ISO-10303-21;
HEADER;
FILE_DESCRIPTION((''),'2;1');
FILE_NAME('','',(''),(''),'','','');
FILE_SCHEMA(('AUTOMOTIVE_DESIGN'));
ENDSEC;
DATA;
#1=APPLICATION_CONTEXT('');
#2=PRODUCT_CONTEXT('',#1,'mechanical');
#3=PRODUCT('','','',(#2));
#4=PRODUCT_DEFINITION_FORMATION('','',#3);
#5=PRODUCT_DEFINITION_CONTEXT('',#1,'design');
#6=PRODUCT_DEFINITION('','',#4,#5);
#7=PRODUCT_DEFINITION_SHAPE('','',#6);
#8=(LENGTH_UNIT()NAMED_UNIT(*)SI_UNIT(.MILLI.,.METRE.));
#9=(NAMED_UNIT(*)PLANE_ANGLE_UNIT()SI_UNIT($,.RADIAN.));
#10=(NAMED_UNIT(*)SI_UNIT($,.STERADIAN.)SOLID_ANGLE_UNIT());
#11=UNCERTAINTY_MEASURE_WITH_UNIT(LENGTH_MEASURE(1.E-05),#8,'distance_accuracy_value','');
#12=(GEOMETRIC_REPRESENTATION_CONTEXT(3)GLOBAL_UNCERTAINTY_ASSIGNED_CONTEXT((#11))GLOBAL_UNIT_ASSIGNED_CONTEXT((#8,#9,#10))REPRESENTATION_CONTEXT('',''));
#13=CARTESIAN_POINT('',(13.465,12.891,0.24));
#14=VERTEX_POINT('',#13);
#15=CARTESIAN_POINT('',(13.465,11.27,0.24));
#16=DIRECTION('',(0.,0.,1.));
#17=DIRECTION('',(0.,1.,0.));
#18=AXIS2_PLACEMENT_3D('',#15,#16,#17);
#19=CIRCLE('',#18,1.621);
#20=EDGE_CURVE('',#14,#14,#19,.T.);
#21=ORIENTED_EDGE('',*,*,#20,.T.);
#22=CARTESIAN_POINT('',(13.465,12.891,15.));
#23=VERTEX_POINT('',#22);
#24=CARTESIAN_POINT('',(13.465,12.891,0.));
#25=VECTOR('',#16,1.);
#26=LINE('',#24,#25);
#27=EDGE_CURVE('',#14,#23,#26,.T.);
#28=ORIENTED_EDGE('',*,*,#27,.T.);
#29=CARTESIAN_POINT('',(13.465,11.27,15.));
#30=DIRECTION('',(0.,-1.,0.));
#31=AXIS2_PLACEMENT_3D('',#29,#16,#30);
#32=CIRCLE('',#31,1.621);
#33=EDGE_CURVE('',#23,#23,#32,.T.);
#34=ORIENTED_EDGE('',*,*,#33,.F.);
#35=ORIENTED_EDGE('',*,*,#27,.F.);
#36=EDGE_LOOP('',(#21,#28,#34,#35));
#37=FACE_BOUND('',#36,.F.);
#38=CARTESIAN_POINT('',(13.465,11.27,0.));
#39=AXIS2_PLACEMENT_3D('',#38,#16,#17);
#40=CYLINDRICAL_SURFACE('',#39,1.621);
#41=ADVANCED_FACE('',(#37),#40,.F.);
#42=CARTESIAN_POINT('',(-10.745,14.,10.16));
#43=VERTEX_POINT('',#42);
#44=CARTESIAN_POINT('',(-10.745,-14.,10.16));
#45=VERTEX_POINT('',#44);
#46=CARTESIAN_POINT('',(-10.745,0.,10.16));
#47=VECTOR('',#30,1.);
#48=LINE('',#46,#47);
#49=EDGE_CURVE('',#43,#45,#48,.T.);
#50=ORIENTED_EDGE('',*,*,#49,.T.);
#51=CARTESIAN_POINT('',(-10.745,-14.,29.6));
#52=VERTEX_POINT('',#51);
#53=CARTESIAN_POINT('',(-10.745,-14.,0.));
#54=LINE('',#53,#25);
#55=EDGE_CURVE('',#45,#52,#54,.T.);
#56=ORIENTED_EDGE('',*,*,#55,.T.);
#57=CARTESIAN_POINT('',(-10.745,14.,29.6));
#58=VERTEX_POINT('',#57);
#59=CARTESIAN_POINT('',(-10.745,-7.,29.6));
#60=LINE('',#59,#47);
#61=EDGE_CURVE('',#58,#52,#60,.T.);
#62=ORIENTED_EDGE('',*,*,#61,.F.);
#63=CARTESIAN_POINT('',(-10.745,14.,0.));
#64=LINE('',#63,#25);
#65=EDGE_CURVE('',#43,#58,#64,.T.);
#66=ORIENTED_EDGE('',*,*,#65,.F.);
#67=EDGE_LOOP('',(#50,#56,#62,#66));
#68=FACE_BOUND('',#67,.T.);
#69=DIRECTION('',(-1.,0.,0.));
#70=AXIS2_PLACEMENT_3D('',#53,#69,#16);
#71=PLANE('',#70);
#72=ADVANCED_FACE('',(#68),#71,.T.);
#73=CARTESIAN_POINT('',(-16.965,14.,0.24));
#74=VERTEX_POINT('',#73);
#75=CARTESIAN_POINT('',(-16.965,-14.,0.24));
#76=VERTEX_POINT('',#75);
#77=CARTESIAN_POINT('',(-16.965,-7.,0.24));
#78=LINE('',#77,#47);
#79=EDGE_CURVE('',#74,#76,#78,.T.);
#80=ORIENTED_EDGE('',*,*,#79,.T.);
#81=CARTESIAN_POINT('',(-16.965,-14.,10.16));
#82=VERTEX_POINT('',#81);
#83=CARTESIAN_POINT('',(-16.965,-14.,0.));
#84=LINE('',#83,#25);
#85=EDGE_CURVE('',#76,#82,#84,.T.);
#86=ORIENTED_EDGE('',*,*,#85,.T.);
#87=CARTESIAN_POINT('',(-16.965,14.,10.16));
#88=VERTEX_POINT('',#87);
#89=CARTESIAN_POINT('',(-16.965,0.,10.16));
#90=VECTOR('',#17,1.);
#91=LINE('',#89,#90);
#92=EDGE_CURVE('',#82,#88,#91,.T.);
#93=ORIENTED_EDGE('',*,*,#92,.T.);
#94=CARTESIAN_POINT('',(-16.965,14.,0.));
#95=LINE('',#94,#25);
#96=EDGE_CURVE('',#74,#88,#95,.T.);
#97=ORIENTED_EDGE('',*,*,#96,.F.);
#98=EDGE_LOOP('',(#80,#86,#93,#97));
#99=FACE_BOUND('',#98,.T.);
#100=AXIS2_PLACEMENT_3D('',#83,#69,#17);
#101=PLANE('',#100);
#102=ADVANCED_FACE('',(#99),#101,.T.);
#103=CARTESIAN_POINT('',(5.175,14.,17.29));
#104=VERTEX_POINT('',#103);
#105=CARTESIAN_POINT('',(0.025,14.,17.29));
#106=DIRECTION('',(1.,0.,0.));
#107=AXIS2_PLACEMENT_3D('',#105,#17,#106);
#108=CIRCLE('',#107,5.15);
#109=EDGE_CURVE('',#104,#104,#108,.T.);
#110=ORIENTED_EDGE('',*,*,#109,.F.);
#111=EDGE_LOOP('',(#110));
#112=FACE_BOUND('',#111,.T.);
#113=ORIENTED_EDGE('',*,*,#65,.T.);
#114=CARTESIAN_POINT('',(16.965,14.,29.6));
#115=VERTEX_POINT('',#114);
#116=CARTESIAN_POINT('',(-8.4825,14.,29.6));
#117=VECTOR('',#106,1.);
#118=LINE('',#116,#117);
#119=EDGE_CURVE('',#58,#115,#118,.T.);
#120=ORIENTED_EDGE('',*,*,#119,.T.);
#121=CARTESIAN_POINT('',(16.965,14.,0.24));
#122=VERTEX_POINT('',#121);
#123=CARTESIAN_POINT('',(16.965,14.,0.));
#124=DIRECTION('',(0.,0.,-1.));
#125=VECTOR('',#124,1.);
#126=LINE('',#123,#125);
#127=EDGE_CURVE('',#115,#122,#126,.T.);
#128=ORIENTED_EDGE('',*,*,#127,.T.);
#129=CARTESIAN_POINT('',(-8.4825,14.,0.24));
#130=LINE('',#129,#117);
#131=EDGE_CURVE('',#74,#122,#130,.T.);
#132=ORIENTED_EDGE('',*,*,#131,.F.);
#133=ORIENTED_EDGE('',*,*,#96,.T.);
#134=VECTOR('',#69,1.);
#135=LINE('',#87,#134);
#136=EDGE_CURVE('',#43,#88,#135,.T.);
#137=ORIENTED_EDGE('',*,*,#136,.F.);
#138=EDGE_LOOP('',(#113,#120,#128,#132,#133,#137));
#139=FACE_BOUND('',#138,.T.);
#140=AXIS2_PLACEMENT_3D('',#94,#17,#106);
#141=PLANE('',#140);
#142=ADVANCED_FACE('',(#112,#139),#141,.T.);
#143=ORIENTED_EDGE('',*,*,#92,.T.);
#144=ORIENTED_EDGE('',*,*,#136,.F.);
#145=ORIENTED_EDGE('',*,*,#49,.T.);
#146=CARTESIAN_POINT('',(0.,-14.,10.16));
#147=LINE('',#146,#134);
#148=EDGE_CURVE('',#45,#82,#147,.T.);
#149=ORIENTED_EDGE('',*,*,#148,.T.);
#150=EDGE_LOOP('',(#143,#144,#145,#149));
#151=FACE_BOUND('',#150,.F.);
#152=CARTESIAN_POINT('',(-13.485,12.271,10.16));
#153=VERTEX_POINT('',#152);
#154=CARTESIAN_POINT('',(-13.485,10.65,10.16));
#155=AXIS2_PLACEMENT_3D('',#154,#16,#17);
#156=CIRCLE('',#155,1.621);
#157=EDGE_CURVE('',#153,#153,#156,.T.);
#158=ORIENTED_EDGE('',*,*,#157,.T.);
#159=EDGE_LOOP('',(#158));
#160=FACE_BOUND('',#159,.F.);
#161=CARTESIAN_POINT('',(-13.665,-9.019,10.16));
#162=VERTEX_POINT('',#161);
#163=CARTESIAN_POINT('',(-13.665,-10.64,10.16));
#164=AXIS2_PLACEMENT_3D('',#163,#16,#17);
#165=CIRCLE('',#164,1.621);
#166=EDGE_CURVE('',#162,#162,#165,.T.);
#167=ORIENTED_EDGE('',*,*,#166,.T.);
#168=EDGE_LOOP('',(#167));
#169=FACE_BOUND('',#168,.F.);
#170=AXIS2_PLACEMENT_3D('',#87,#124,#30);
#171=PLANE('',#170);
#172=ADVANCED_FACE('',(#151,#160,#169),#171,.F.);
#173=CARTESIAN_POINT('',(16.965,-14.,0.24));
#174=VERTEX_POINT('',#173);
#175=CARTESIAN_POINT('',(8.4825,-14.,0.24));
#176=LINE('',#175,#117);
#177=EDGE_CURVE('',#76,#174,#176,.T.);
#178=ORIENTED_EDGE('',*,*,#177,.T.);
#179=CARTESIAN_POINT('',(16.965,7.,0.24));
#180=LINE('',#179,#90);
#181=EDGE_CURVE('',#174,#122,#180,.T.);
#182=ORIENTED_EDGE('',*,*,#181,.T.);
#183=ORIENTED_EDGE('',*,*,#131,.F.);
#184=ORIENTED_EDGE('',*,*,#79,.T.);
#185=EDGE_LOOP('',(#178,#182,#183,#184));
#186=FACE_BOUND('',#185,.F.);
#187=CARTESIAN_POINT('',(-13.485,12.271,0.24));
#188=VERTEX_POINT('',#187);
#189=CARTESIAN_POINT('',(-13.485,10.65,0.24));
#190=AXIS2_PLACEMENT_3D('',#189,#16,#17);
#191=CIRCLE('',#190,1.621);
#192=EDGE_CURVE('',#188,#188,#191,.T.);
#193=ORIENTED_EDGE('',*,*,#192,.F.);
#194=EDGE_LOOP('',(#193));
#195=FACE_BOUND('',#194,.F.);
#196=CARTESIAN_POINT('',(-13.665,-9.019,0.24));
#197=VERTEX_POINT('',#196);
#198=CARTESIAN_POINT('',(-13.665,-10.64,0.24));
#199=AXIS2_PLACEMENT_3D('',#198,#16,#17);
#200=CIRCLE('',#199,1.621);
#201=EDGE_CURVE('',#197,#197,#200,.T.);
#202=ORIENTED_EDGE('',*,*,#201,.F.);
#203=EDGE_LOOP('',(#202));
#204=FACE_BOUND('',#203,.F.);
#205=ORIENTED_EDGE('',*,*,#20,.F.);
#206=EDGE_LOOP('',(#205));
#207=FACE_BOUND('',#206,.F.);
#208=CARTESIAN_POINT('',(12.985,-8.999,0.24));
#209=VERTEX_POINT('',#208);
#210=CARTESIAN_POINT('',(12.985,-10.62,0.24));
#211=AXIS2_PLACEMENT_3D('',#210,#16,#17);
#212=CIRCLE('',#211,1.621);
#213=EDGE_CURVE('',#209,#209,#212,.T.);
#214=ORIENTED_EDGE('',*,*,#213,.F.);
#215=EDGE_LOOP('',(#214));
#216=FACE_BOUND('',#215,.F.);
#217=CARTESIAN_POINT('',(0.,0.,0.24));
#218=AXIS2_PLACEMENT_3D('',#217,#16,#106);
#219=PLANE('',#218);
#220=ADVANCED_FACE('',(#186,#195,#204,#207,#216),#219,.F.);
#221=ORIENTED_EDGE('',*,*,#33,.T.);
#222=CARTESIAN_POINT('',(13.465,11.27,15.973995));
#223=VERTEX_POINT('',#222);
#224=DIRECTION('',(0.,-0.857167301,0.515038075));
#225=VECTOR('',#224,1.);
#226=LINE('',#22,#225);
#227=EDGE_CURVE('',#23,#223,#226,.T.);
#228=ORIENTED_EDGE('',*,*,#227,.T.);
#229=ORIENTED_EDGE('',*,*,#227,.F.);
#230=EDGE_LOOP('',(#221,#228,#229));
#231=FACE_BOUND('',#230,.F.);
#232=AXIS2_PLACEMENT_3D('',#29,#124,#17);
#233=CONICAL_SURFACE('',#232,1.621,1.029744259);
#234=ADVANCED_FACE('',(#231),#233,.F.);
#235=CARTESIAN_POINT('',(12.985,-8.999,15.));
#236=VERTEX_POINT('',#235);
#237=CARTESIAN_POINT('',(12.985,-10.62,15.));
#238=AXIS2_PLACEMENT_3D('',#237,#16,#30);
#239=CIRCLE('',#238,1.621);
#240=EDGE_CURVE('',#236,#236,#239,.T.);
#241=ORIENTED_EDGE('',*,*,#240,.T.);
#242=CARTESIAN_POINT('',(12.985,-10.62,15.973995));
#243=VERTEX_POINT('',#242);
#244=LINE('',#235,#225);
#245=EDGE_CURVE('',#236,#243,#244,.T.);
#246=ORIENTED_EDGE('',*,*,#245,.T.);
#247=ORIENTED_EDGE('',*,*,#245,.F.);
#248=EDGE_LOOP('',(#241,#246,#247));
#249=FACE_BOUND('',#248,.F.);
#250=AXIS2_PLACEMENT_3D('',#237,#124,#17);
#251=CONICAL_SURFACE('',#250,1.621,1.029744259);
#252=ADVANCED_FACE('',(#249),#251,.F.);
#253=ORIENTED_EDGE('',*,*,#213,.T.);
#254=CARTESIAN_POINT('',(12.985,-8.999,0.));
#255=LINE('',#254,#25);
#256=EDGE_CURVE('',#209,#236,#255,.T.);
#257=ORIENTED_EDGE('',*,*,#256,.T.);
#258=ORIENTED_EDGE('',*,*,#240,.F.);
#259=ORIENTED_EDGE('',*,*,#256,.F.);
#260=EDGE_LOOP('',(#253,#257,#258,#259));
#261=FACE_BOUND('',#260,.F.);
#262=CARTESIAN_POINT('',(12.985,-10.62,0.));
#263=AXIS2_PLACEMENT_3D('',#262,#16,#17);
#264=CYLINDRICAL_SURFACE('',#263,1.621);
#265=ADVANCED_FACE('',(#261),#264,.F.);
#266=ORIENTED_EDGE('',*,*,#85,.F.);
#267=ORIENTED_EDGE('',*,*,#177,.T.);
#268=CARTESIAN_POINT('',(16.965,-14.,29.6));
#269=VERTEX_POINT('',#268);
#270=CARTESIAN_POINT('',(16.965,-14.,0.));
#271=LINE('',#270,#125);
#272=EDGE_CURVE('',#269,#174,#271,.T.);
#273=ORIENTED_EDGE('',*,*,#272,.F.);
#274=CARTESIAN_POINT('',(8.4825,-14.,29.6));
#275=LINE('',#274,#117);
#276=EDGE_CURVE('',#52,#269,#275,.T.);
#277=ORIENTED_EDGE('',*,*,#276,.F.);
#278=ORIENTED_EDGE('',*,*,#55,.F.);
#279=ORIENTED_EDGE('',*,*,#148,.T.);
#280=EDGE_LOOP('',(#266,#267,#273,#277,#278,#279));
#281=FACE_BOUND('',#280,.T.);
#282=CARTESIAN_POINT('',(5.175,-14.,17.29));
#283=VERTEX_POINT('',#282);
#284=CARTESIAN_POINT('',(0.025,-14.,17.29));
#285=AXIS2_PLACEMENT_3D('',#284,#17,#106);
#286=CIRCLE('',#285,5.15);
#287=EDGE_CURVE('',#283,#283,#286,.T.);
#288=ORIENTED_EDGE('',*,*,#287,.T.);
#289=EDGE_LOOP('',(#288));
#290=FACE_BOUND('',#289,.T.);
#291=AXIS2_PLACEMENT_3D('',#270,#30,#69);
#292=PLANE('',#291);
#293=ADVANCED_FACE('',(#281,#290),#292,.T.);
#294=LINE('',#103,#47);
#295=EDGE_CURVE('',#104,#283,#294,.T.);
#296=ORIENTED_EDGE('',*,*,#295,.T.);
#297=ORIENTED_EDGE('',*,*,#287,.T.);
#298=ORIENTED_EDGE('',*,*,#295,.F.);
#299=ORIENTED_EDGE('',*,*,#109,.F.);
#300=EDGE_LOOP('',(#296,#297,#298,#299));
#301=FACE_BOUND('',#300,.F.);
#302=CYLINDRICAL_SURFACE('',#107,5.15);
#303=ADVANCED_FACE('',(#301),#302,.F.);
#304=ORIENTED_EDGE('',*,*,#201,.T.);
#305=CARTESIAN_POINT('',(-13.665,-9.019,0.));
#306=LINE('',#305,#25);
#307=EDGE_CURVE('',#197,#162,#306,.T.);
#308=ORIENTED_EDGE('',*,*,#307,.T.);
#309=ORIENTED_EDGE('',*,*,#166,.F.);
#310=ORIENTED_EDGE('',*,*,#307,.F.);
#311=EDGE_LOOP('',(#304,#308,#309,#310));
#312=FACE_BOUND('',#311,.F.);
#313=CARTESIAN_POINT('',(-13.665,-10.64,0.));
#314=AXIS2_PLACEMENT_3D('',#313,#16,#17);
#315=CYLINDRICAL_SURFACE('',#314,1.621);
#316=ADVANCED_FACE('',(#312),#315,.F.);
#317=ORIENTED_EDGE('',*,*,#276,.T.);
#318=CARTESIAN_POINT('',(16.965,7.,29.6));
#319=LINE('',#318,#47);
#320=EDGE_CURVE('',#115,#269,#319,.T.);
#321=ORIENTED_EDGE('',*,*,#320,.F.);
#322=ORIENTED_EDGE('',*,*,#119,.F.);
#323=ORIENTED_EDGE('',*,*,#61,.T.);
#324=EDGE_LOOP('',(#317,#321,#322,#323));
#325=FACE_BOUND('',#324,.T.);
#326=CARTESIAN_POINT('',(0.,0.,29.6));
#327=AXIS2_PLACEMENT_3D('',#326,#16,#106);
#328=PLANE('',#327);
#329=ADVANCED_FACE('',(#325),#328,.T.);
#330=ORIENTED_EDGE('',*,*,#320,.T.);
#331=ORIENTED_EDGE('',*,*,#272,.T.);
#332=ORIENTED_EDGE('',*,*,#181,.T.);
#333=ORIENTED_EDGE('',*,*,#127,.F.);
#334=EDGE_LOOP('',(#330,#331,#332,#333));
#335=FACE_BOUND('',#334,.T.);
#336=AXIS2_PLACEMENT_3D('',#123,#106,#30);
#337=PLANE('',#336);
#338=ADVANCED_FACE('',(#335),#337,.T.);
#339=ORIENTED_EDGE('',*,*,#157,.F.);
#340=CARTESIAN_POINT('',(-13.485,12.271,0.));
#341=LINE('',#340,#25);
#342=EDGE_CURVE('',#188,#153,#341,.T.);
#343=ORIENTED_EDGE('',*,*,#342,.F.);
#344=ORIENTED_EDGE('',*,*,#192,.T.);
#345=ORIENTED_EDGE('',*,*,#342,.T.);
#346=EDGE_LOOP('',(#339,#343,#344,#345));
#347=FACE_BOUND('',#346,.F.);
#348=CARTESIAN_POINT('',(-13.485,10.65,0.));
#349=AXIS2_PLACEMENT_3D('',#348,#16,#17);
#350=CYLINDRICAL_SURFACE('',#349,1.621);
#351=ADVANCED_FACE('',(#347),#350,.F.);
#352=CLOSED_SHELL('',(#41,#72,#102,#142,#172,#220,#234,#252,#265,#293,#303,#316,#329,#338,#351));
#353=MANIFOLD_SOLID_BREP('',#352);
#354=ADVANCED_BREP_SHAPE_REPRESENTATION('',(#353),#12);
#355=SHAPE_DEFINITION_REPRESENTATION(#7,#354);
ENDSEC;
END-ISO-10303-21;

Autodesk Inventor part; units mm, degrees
ref_plane "YZ Plane" through (0, 0, 0) normal (1, 0, 0) x (0, 1, 0)
ref_plane "XZ Plane" through (0, 0, 0) normal (0, 1, 0) x (-1, 0, 0)
ref_plane "XY Plane" through (0, 0, 0) normal (0, 0, 1) x (1, 0, 0)
sketch "Sketch2" plane through (0, 0, 0) normal (0, 0, 1) x (1, 0, 0)
  line L0 (-16.965, 14) -> (16.965, 14)
  line L1 (16.965, 14) -> (16.965, -14)
  line L2 (16.965, -14) -> (-16.965, -14)
  line L3 (-16.965, -14) -> (-16.965, 14)
  line L4 (-16.965, 14) -> (16.965, -14) construction
  line L5 (16.965, 14) -> (-16.965, -14) construction
  point P0 (0, 0)
  dimension "d0" = 33.93
  dimension "d1" = 28
extrude "Extrusion1" add sketch "Sketch2" along normal blind 29.6
sketch "Sketch4" plane through (0, 0, 0) normal (0, 0, -1) x (-1, 0, 0)
  line L0 (16.965, 14) -> (16.965, -14) construction
  line L1 (-16.965, 14) -> (16.965, 14) construction
  line L2 (16.965, -14) -> (-16.965, -14) construction
  line L3 (-16.965, -14) -> (-16.965, 14) construction
  point P0 (13.485, 10.65)
  point P1 (13.665, -10.64)
  point P2 (-12.985, -10.62)
  point P3 (-13.465, 11.27)
  dimension "d11" = 3.48
  dimension "d12" = 3.3
  dimension "d13" = 3.35
  dimension "d14" = 3.36
  dimension "d15" = 3.38
  dimension "d16" = 3.98
  dimension "d17" = 3.5
  dimension "d18" = 2.73
hole "Hole1" at (13.465, 11.27, 0) at (12.985, -10.62, 0) at (-13.665, -10.64, 0) at (-13.485, 10.65, 0) direction (0, 0, 1) diameter 3.242 depth 15 tip angle 118 thread size "M4x0.7" class "6H" standard "ISO Metric profile"
sketch "Sketch3" plane through (-16.965, 14, 0) normal (0, 1, 0) x (1, 0, 0)
  circle A0 centre (16.99, -17.29) radius 5.15
  line L0 (0, 0) -> (0, -29.6) projected
  line L1 (33.93, 0) -> (0, 0) projected
  line L2 (33.93, -29.6) -> (0, -29.6) construction
  line L3 (11.84, -12.14) -> (22.14, -12.14) construction
  line L4 (22.14, -12.14) -> (22.14, -22.44) construction
  line L5 (22.14, -22.44) -> (11.84, -22.44) construction
  line L6 (11.84, -22.44) -> (11.84, -12.14) construction
  line L7 (11.84, -12.14) -> (22.14, -22.44) construction
  line L8 (22.14, -12.14) -> (11.84, -22.44) construction
  line L9 (33.93, 0) -> (33.93, -29.6) projected
  point P0 (16.965, 0)
  point P1 (0, -14.8)
  point P2 (16.965, 0)
  dimension "d4" = 10.3
  dimension "d30" = 7.16
  dimension "d32" = 11.79
extrude "Extrusion2" cut sketch "Sketch3" against normal through all
sketch "Sketch5" plane through (-16.965, -14, 0) normal (-1, 0, 0) x (0, 0, 1)
  line L0 (29.6, 0) -> (29.6, 28) projected
  line L1 (22.44, 0) -> (12.14, 0) projected
  line L2 (29.6, 28) -> (10.16, 28)
  line L3 (10.16, 28) -> (10.16, 0)
  line L4 (10.16, 0) -> (29.6, 0)
  line L5 (29.6, 0) -> (29.6, 28)
  point P0 (0, 14)
  dimension "d26" = 19.44
extrude "Extrusion3" cut sketch "Sketch5" against normal blind 6.22
move faces "Move1" translate (0, 0, 0.24) faces at (3.877, 3.4597, 0)
properties part number "Upper Z lifter"
